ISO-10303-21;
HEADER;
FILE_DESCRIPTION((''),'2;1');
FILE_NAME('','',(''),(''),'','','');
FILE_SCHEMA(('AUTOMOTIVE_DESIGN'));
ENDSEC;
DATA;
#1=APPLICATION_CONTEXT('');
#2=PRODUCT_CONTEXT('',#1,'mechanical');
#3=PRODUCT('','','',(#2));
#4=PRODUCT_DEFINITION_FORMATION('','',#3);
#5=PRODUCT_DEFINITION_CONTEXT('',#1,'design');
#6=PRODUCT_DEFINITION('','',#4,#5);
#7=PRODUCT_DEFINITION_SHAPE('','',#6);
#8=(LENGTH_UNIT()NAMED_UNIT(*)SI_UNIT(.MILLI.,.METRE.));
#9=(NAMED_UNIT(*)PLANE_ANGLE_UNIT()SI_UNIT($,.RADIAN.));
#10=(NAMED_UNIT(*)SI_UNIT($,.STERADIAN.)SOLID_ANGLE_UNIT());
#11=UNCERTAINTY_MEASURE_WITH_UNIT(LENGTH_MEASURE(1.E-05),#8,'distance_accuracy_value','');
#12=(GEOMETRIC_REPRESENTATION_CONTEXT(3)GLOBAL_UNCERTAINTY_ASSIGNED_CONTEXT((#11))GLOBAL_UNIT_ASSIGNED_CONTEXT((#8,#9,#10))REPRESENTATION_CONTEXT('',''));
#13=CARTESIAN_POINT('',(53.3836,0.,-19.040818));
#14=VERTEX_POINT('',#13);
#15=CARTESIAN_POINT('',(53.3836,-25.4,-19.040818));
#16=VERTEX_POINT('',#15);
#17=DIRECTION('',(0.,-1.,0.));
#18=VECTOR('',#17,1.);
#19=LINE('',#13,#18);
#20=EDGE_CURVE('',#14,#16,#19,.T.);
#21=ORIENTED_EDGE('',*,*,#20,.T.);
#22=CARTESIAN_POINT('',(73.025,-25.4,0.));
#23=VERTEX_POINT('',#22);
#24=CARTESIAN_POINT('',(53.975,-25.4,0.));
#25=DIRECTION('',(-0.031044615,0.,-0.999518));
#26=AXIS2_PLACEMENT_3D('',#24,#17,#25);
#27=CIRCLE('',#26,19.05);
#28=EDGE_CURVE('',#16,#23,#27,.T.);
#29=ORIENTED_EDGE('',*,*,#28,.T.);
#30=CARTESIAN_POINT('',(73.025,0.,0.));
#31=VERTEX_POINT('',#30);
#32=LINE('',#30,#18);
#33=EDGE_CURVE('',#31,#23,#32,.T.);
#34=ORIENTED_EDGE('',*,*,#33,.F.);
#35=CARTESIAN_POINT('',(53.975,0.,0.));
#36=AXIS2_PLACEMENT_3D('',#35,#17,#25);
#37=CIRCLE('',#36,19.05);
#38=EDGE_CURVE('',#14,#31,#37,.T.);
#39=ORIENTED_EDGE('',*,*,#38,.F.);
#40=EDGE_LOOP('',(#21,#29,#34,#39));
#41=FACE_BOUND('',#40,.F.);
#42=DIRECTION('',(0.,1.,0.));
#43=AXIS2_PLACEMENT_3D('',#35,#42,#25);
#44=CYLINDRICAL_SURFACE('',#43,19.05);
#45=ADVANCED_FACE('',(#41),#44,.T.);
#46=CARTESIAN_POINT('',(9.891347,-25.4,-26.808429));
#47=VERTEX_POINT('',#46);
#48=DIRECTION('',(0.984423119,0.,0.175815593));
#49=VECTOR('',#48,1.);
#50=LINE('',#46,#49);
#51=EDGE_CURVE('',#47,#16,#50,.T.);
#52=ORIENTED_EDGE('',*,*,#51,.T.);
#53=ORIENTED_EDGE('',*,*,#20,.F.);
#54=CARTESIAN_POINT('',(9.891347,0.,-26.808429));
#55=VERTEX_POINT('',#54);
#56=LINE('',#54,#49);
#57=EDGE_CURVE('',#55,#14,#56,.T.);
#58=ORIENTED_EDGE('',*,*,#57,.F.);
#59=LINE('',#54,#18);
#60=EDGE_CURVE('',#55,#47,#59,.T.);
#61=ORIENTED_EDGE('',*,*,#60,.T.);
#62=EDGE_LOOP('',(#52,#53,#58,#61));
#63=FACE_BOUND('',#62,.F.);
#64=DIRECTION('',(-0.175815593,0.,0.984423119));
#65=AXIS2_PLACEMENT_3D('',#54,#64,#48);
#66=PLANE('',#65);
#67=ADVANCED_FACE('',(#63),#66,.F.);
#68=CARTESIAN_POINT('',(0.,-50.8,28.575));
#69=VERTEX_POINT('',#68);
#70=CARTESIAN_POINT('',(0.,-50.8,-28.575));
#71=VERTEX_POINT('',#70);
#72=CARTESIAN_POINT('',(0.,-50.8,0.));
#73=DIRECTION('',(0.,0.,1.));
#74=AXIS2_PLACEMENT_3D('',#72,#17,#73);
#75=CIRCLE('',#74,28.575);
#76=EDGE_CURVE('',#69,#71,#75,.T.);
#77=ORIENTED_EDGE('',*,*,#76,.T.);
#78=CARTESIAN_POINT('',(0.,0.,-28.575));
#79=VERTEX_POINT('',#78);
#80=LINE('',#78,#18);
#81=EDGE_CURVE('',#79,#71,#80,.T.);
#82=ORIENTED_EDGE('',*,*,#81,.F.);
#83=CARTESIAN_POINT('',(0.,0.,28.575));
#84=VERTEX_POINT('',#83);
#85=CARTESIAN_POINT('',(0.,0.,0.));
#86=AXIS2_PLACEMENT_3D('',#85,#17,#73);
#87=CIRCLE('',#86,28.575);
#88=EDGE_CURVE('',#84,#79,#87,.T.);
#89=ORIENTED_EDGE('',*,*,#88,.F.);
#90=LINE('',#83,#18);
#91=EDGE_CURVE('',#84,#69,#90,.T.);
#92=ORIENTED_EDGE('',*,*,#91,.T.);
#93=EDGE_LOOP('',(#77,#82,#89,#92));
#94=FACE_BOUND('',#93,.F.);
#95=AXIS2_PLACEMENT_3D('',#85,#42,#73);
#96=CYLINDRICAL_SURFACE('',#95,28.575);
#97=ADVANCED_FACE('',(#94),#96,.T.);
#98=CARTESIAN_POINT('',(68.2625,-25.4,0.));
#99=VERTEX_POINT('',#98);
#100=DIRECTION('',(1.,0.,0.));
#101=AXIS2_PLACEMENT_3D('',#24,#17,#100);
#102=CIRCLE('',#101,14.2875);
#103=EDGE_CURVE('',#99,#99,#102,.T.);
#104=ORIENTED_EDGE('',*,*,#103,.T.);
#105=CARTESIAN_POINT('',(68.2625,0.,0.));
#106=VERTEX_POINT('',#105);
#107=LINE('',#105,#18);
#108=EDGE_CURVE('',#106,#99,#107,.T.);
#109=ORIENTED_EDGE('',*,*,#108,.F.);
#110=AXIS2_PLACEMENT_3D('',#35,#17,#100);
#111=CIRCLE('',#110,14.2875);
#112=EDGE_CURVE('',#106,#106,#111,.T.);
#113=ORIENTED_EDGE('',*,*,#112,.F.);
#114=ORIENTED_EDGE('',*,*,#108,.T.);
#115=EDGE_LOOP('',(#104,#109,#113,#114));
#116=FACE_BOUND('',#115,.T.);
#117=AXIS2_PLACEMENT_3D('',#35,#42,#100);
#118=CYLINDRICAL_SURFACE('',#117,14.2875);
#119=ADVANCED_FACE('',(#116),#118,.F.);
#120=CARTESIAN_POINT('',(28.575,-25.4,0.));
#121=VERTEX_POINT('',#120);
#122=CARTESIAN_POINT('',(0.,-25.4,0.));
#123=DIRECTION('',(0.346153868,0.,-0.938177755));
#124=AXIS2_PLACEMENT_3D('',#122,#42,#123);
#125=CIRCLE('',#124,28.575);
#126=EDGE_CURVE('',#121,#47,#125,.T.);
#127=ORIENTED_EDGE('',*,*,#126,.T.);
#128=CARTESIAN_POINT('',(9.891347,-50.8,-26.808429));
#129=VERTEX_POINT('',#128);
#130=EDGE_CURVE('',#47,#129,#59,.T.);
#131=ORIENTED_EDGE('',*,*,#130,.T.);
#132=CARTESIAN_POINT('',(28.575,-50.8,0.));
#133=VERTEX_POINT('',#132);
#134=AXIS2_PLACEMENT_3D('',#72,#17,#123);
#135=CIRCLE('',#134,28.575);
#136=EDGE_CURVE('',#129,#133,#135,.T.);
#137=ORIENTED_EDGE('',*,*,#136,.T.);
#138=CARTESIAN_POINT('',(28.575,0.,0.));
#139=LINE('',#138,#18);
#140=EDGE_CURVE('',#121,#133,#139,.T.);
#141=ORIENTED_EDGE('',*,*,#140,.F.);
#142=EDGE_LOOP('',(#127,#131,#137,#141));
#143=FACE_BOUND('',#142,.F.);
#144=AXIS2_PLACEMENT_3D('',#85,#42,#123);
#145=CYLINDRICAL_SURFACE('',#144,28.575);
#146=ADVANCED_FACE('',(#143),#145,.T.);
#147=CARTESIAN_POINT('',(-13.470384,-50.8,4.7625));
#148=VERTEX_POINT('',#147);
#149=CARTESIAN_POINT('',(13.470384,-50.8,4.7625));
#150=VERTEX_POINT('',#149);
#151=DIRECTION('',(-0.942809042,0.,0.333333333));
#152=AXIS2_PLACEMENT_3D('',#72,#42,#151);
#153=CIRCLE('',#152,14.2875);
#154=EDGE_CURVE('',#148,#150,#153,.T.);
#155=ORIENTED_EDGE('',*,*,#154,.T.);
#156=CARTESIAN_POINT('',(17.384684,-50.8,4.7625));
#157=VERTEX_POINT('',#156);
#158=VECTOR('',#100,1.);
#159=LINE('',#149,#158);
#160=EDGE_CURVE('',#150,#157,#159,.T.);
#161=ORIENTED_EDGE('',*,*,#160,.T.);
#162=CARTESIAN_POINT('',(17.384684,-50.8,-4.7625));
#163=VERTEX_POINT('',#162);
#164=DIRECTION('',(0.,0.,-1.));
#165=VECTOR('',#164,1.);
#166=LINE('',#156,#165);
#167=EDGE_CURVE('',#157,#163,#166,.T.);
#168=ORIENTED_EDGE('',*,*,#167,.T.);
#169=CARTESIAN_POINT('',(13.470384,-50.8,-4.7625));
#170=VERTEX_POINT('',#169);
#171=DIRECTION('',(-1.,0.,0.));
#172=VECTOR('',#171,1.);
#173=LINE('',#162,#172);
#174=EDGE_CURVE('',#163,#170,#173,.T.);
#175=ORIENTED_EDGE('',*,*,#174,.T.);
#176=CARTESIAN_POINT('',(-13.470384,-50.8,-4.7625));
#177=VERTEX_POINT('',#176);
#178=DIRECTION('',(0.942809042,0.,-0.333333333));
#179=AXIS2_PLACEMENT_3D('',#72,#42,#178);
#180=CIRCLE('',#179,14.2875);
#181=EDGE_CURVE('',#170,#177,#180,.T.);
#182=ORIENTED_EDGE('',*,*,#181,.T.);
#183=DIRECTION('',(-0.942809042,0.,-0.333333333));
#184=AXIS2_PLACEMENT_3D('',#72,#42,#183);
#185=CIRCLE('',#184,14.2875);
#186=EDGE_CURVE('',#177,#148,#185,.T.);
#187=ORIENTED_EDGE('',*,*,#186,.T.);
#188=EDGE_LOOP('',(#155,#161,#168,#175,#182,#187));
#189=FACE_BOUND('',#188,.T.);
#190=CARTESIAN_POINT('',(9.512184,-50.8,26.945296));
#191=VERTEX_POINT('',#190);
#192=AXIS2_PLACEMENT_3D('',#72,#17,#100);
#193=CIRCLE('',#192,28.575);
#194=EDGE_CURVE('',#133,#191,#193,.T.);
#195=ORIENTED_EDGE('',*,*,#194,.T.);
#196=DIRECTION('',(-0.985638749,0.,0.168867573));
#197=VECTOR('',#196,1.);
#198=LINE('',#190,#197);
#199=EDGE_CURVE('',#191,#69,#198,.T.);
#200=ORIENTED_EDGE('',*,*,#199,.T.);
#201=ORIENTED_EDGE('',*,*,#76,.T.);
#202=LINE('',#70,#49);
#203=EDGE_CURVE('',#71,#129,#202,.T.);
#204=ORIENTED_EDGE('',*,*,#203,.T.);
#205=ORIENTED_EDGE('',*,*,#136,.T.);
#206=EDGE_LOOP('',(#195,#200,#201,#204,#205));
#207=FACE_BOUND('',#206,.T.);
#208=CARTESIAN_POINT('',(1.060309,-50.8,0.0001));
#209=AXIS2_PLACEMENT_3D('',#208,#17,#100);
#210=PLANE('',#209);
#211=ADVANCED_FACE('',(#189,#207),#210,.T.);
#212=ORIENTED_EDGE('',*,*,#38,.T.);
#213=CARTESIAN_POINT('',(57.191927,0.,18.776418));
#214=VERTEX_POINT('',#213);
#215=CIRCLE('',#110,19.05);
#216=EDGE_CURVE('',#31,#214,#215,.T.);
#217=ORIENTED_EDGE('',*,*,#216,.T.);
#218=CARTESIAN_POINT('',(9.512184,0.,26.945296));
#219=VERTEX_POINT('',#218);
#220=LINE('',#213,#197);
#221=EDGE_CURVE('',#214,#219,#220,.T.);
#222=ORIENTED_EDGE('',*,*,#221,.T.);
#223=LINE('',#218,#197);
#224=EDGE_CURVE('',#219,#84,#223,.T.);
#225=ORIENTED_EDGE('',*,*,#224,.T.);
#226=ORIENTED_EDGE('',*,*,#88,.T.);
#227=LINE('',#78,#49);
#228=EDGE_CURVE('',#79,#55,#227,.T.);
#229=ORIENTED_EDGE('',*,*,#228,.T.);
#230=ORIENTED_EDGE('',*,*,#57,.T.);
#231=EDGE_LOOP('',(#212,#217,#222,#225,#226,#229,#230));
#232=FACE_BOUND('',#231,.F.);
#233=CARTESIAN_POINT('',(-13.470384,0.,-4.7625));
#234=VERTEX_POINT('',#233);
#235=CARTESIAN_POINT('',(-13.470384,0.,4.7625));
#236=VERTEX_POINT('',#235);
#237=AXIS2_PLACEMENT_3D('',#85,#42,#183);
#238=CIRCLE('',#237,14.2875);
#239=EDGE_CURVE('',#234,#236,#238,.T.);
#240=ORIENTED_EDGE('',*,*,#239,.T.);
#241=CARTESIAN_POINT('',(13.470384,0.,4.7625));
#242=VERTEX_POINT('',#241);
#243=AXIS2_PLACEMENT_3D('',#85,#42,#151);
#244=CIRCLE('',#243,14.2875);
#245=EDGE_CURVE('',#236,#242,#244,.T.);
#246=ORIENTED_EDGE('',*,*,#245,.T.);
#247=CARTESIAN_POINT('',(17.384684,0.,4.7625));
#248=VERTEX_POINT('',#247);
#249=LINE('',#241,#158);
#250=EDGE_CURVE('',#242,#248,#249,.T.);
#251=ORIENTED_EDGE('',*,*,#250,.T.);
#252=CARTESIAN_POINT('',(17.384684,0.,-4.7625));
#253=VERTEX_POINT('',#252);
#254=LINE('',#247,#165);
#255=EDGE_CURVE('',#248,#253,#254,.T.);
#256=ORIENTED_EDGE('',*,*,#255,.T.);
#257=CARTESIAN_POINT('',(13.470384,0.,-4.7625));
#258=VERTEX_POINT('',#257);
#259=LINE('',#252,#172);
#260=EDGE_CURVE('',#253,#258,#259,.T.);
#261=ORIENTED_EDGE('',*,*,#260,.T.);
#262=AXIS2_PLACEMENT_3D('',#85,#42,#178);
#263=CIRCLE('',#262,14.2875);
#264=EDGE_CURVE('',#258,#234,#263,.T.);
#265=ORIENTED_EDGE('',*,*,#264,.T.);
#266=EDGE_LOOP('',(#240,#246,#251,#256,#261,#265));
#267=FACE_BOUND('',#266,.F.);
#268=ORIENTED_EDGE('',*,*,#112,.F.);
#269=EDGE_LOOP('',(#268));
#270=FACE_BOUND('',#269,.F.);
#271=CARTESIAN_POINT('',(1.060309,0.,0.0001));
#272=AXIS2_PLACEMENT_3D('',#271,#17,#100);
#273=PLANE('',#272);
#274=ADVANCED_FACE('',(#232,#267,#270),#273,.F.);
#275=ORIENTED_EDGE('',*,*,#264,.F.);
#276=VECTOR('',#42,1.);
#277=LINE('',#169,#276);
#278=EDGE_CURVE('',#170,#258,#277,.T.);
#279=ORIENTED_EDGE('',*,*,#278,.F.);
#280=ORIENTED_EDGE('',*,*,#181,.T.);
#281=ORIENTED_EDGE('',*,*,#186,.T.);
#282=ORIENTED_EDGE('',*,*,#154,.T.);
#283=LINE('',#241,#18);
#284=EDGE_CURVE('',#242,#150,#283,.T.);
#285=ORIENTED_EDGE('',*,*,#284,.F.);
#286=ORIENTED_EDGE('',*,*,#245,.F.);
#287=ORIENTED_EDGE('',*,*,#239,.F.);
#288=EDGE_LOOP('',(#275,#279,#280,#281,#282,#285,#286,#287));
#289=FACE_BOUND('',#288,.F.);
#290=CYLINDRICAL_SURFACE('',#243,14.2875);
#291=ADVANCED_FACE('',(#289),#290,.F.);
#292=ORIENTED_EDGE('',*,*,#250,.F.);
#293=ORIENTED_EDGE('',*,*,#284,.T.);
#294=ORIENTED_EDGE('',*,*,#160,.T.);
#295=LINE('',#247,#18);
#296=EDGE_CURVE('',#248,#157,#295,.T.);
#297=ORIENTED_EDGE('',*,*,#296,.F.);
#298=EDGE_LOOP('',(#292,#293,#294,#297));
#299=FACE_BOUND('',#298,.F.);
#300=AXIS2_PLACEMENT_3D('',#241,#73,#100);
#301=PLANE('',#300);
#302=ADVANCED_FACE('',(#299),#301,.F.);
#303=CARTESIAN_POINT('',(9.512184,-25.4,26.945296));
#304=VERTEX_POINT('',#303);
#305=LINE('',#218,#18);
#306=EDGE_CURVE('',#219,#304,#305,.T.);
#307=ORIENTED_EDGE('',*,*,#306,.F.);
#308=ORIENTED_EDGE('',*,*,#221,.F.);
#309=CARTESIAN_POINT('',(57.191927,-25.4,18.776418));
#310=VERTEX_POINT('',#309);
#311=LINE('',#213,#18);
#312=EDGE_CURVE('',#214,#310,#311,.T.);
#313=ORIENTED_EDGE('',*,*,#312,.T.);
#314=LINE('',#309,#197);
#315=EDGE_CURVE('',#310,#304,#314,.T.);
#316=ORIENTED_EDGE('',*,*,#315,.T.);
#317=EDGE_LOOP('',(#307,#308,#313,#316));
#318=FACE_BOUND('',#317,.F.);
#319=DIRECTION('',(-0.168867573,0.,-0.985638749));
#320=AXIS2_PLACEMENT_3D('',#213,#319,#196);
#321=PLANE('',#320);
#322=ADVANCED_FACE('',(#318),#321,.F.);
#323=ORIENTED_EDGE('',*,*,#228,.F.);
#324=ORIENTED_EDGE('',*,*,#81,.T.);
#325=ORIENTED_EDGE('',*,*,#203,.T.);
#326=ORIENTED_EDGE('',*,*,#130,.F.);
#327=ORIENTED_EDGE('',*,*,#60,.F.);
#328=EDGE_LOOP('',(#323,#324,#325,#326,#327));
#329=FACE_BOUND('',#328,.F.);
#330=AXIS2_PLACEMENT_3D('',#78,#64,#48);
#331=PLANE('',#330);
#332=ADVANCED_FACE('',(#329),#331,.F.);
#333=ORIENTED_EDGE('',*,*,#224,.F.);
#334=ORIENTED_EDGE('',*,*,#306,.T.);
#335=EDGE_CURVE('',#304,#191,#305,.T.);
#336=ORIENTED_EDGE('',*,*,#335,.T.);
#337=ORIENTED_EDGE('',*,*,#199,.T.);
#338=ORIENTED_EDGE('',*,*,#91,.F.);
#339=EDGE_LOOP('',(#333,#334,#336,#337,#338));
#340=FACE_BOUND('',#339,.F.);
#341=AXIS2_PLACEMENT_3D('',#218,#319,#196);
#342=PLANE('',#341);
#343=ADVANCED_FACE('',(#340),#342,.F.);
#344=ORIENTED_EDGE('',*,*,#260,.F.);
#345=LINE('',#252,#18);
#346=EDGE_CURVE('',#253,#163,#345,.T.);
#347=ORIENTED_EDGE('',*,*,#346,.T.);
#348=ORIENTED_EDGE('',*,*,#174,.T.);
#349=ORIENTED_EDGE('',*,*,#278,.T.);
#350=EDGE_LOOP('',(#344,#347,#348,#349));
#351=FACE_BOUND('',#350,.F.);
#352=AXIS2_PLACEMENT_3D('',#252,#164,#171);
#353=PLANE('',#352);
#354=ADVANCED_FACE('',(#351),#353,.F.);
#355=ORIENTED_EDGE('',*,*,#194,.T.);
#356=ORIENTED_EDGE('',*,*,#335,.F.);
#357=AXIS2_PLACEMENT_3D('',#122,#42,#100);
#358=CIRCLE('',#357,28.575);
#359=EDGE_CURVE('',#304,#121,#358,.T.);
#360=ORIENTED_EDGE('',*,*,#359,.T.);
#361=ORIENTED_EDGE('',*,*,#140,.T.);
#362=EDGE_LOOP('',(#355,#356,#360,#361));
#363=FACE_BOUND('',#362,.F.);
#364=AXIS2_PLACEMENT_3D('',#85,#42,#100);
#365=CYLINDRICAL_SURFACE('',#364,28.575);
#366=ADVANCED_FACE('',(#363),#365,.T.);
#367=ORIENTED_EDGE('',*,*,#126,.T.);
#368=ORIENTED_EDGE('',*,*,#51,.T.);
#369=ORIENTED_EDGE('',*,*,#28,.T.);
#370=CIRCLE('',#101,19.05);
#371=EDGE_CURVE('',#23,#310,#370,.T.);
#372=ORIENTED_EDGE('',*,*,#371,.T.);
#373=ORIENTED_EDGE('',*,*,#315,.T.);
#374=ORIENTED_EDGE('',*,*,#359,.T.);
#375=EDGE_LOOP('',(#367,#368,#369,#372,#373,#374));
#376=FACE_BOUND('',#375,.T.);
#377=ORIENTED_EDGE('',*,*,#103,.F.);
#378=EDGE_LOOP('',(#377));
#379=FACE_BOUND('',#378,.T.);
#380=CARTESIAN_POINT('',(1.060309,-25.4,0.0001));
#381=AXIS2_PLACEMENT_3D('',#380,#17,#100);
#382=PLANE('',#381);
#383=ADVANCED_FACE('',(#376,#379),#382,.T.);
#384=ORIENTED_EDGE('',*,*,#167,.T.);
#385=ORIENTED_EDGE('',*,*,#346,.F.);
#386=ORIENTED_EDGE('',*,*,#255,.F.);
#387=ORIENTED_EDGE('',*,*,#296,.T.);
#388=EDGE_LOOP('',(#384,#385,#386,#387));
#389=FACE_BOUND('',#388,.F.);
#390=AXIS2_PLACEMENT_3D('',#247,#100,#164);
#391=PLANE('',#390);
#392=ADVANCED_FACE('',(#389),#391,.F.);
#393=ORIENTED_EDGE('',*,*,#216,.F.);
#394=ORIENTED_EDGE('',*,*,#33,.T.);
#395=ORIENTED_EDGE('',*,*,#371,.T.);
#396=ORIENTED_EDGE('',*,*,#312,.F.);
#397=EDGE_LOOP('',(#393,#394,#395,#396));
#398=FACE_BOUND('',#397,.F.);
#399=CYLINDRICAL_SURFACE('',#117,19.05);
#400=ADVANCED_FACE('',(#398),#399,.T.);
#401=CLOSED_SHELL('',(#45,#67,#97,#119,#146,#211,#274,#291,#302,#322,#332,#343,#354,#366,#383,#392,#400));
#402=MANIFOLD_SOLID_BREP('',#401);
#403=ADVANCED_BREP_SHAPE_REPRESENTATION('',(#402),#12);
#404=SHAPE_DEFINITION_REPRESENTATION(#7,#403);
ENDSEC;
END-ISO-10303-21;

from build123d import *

# Parameters (mm, degrees)
F0_R     = 14.2875
F1_DEPTH = 25.4
F2_DEPTH = 50.8


with BuildPart() as f1:
    # F0 (on Front) → F1 (new body)
    with BuildSketch(Plane.XZ):
        with BuildLine():
            Line((9.5121844836, 26.9452959039), (0, 28.575))
            ThreePointArc((0, 28.575), (-28.575, 0), (0, -28.575))
            Line((0, -28.575), (9.8913467837, -26.8084293424))
            ThreePointArc((9.8913467837, -26.8084293424), (23.4432917841, -16.3383810498), (28.575, 0))
            ThreePointArc((28.575, 0), (23.3274655355, 16.5033322905), (9.5121844836, 26.9452959039))
        make_face()
        with BuildLine():
            ThreePointArc((-13.4703841816, 4.7625), (0, 14.2875), (13.4703841816, 4.7625))
            Line((13.4703841816, 4.7625), (17.3846837133, 4.7625))
            Line((17.3846837133, 4.7625), (17.3846837133, -4.7625))
            Line((17.3846837133, -4.7625), (13.4703841816, -4.7625))
            ThreePointArc((13.4703841816, -4.7625), (0, -14.2875), (-13.4703841816, -4.7625))
            Line((-13.4703841816, -4.7625), (-17.3846837133, -4.7625))
            Line((-17.3846837133, -4.7625), (-17.3846837133, 4.7625))
            Line((-17.3846837133, 4.7625), (-13.4703841816, 4.7625))
        make_face(mode=Mode.SUBTRACT)
        with BuildLine():
            Line((57.1919272622, 18.7764181619), (9.5121844836, 26.9452959039))
            ThreePointArc((9.5121844836, 26.9452959039), (23.3274655355, 16.5033322905), (28.575, 0))
            ThreePointArc((28.575, 0), (23.4432917841, -16.3383810498), (9.8913467837, -26.8084293424))
            Line((9.8913467837, -26.8084293424), (53.3836000765, -19.0408178955))
            ThreePointArc((53.3836000765, -19.0408178955), (35.0208663029, 1.9087471789), (57.1919272622, 18.7764181619))
        make_face()
        with BuildLine():
            ThreePointArc((73.025, 0), (68.5383952831, 12.2804730295), (57.1919272622, 18.7764181619))
            ThreePointArc((57.1919272622, 18.7764181619), (35.0208663029, 1.9087471789), (53.3836000765, -19.0408178955))
            ThreePointArc((53.3836000765, -19.0408178955), (67.2346442535, -13.67787755), (73.025, 0))
        make_face()
        with Locations((53.975, 0)):
            Circle(F0_R, mode=Mode.SUBTRACT)
        with BuildLine():
            ThreePointArc((-13.4703841816, -4.7625), (-14.2875, 0), (-13.4703841816, 4.7625))
            Line((-13.4703841816, 4.7625), (-17.3846837133, 4.7625))
            Line((-17.3846837133, 4.7625), (-17.3846837133, -4.7625))
            Line((-17.3846837133, -4.7625), (-13.4703841816, -4.7625))
        make_face()
    extrude(amount=F1_DEPTH)

    # F0 (on Front) → F2 (join)
    with BuildSketch(Plane.XZ):
        with BuildLine():
            Line((9.5121844836, 26.9452959039), (0, 28.575))
            ThreePointArc((0, 28.575), (-28.575, 0), (0, -28.575))
            Line((0, -28.575), (9.8913467837, -26.8084293424))
            ThreePointArc((9.8913467837, -26.8084293424), (23.4432917841, -16.3383810498), (28.575, 0))
            ThreePointArc((28.575, 0), (23.3274655355, 16.5033322905), (9.5121844836, 26.9452959039))
        make_face()
        with BuildLine():
            ThreePointArc((-13.4703841816, 4.7625), (0, 14.2875), (13.4703841816, 4.7625))
            Line((13.4703841816, 4.7625), (17.3846837133, 4.7625))
            Line((17.3846837133, 4.7625), (17.3846837133, -4.7625))
            Line((17.3846837133, -4.7625), (13.4703841816, -4.7625))
            ThreePointArc((13.4703841816, -4.7625), (0, -14.2875), (-13.4703841816, -4.7625))
            Line((-13.4703841816, -4.7625), (-17.3846837133, -4.7625))
            Line((-17.3846837133, -4.7625), (-17.3846837133, 4.7625))
            Line((-17.3846837133, 4.7625), (-13.4703841816, 4.7625))
        make_face(mode=Mode.SUBTRACT)
        with BuildLine():
            ThreePointArc((-13.4703841816, -4.7625), (-14.2875, 0), (-13.4703841816, 4.7625))
            Line((-13.4703841816, 4.7625), (-17.3846837133, 4.7625))
            Line((-17.3846837133, 4.7625), (-17.3846837133, -4.7625))
            Line((-17.3846837133, -4.7625), (-13.4703841816, -4.7625))
        make_face()
    extrude(amount=F2_DEPTH)


solid = f1.part
